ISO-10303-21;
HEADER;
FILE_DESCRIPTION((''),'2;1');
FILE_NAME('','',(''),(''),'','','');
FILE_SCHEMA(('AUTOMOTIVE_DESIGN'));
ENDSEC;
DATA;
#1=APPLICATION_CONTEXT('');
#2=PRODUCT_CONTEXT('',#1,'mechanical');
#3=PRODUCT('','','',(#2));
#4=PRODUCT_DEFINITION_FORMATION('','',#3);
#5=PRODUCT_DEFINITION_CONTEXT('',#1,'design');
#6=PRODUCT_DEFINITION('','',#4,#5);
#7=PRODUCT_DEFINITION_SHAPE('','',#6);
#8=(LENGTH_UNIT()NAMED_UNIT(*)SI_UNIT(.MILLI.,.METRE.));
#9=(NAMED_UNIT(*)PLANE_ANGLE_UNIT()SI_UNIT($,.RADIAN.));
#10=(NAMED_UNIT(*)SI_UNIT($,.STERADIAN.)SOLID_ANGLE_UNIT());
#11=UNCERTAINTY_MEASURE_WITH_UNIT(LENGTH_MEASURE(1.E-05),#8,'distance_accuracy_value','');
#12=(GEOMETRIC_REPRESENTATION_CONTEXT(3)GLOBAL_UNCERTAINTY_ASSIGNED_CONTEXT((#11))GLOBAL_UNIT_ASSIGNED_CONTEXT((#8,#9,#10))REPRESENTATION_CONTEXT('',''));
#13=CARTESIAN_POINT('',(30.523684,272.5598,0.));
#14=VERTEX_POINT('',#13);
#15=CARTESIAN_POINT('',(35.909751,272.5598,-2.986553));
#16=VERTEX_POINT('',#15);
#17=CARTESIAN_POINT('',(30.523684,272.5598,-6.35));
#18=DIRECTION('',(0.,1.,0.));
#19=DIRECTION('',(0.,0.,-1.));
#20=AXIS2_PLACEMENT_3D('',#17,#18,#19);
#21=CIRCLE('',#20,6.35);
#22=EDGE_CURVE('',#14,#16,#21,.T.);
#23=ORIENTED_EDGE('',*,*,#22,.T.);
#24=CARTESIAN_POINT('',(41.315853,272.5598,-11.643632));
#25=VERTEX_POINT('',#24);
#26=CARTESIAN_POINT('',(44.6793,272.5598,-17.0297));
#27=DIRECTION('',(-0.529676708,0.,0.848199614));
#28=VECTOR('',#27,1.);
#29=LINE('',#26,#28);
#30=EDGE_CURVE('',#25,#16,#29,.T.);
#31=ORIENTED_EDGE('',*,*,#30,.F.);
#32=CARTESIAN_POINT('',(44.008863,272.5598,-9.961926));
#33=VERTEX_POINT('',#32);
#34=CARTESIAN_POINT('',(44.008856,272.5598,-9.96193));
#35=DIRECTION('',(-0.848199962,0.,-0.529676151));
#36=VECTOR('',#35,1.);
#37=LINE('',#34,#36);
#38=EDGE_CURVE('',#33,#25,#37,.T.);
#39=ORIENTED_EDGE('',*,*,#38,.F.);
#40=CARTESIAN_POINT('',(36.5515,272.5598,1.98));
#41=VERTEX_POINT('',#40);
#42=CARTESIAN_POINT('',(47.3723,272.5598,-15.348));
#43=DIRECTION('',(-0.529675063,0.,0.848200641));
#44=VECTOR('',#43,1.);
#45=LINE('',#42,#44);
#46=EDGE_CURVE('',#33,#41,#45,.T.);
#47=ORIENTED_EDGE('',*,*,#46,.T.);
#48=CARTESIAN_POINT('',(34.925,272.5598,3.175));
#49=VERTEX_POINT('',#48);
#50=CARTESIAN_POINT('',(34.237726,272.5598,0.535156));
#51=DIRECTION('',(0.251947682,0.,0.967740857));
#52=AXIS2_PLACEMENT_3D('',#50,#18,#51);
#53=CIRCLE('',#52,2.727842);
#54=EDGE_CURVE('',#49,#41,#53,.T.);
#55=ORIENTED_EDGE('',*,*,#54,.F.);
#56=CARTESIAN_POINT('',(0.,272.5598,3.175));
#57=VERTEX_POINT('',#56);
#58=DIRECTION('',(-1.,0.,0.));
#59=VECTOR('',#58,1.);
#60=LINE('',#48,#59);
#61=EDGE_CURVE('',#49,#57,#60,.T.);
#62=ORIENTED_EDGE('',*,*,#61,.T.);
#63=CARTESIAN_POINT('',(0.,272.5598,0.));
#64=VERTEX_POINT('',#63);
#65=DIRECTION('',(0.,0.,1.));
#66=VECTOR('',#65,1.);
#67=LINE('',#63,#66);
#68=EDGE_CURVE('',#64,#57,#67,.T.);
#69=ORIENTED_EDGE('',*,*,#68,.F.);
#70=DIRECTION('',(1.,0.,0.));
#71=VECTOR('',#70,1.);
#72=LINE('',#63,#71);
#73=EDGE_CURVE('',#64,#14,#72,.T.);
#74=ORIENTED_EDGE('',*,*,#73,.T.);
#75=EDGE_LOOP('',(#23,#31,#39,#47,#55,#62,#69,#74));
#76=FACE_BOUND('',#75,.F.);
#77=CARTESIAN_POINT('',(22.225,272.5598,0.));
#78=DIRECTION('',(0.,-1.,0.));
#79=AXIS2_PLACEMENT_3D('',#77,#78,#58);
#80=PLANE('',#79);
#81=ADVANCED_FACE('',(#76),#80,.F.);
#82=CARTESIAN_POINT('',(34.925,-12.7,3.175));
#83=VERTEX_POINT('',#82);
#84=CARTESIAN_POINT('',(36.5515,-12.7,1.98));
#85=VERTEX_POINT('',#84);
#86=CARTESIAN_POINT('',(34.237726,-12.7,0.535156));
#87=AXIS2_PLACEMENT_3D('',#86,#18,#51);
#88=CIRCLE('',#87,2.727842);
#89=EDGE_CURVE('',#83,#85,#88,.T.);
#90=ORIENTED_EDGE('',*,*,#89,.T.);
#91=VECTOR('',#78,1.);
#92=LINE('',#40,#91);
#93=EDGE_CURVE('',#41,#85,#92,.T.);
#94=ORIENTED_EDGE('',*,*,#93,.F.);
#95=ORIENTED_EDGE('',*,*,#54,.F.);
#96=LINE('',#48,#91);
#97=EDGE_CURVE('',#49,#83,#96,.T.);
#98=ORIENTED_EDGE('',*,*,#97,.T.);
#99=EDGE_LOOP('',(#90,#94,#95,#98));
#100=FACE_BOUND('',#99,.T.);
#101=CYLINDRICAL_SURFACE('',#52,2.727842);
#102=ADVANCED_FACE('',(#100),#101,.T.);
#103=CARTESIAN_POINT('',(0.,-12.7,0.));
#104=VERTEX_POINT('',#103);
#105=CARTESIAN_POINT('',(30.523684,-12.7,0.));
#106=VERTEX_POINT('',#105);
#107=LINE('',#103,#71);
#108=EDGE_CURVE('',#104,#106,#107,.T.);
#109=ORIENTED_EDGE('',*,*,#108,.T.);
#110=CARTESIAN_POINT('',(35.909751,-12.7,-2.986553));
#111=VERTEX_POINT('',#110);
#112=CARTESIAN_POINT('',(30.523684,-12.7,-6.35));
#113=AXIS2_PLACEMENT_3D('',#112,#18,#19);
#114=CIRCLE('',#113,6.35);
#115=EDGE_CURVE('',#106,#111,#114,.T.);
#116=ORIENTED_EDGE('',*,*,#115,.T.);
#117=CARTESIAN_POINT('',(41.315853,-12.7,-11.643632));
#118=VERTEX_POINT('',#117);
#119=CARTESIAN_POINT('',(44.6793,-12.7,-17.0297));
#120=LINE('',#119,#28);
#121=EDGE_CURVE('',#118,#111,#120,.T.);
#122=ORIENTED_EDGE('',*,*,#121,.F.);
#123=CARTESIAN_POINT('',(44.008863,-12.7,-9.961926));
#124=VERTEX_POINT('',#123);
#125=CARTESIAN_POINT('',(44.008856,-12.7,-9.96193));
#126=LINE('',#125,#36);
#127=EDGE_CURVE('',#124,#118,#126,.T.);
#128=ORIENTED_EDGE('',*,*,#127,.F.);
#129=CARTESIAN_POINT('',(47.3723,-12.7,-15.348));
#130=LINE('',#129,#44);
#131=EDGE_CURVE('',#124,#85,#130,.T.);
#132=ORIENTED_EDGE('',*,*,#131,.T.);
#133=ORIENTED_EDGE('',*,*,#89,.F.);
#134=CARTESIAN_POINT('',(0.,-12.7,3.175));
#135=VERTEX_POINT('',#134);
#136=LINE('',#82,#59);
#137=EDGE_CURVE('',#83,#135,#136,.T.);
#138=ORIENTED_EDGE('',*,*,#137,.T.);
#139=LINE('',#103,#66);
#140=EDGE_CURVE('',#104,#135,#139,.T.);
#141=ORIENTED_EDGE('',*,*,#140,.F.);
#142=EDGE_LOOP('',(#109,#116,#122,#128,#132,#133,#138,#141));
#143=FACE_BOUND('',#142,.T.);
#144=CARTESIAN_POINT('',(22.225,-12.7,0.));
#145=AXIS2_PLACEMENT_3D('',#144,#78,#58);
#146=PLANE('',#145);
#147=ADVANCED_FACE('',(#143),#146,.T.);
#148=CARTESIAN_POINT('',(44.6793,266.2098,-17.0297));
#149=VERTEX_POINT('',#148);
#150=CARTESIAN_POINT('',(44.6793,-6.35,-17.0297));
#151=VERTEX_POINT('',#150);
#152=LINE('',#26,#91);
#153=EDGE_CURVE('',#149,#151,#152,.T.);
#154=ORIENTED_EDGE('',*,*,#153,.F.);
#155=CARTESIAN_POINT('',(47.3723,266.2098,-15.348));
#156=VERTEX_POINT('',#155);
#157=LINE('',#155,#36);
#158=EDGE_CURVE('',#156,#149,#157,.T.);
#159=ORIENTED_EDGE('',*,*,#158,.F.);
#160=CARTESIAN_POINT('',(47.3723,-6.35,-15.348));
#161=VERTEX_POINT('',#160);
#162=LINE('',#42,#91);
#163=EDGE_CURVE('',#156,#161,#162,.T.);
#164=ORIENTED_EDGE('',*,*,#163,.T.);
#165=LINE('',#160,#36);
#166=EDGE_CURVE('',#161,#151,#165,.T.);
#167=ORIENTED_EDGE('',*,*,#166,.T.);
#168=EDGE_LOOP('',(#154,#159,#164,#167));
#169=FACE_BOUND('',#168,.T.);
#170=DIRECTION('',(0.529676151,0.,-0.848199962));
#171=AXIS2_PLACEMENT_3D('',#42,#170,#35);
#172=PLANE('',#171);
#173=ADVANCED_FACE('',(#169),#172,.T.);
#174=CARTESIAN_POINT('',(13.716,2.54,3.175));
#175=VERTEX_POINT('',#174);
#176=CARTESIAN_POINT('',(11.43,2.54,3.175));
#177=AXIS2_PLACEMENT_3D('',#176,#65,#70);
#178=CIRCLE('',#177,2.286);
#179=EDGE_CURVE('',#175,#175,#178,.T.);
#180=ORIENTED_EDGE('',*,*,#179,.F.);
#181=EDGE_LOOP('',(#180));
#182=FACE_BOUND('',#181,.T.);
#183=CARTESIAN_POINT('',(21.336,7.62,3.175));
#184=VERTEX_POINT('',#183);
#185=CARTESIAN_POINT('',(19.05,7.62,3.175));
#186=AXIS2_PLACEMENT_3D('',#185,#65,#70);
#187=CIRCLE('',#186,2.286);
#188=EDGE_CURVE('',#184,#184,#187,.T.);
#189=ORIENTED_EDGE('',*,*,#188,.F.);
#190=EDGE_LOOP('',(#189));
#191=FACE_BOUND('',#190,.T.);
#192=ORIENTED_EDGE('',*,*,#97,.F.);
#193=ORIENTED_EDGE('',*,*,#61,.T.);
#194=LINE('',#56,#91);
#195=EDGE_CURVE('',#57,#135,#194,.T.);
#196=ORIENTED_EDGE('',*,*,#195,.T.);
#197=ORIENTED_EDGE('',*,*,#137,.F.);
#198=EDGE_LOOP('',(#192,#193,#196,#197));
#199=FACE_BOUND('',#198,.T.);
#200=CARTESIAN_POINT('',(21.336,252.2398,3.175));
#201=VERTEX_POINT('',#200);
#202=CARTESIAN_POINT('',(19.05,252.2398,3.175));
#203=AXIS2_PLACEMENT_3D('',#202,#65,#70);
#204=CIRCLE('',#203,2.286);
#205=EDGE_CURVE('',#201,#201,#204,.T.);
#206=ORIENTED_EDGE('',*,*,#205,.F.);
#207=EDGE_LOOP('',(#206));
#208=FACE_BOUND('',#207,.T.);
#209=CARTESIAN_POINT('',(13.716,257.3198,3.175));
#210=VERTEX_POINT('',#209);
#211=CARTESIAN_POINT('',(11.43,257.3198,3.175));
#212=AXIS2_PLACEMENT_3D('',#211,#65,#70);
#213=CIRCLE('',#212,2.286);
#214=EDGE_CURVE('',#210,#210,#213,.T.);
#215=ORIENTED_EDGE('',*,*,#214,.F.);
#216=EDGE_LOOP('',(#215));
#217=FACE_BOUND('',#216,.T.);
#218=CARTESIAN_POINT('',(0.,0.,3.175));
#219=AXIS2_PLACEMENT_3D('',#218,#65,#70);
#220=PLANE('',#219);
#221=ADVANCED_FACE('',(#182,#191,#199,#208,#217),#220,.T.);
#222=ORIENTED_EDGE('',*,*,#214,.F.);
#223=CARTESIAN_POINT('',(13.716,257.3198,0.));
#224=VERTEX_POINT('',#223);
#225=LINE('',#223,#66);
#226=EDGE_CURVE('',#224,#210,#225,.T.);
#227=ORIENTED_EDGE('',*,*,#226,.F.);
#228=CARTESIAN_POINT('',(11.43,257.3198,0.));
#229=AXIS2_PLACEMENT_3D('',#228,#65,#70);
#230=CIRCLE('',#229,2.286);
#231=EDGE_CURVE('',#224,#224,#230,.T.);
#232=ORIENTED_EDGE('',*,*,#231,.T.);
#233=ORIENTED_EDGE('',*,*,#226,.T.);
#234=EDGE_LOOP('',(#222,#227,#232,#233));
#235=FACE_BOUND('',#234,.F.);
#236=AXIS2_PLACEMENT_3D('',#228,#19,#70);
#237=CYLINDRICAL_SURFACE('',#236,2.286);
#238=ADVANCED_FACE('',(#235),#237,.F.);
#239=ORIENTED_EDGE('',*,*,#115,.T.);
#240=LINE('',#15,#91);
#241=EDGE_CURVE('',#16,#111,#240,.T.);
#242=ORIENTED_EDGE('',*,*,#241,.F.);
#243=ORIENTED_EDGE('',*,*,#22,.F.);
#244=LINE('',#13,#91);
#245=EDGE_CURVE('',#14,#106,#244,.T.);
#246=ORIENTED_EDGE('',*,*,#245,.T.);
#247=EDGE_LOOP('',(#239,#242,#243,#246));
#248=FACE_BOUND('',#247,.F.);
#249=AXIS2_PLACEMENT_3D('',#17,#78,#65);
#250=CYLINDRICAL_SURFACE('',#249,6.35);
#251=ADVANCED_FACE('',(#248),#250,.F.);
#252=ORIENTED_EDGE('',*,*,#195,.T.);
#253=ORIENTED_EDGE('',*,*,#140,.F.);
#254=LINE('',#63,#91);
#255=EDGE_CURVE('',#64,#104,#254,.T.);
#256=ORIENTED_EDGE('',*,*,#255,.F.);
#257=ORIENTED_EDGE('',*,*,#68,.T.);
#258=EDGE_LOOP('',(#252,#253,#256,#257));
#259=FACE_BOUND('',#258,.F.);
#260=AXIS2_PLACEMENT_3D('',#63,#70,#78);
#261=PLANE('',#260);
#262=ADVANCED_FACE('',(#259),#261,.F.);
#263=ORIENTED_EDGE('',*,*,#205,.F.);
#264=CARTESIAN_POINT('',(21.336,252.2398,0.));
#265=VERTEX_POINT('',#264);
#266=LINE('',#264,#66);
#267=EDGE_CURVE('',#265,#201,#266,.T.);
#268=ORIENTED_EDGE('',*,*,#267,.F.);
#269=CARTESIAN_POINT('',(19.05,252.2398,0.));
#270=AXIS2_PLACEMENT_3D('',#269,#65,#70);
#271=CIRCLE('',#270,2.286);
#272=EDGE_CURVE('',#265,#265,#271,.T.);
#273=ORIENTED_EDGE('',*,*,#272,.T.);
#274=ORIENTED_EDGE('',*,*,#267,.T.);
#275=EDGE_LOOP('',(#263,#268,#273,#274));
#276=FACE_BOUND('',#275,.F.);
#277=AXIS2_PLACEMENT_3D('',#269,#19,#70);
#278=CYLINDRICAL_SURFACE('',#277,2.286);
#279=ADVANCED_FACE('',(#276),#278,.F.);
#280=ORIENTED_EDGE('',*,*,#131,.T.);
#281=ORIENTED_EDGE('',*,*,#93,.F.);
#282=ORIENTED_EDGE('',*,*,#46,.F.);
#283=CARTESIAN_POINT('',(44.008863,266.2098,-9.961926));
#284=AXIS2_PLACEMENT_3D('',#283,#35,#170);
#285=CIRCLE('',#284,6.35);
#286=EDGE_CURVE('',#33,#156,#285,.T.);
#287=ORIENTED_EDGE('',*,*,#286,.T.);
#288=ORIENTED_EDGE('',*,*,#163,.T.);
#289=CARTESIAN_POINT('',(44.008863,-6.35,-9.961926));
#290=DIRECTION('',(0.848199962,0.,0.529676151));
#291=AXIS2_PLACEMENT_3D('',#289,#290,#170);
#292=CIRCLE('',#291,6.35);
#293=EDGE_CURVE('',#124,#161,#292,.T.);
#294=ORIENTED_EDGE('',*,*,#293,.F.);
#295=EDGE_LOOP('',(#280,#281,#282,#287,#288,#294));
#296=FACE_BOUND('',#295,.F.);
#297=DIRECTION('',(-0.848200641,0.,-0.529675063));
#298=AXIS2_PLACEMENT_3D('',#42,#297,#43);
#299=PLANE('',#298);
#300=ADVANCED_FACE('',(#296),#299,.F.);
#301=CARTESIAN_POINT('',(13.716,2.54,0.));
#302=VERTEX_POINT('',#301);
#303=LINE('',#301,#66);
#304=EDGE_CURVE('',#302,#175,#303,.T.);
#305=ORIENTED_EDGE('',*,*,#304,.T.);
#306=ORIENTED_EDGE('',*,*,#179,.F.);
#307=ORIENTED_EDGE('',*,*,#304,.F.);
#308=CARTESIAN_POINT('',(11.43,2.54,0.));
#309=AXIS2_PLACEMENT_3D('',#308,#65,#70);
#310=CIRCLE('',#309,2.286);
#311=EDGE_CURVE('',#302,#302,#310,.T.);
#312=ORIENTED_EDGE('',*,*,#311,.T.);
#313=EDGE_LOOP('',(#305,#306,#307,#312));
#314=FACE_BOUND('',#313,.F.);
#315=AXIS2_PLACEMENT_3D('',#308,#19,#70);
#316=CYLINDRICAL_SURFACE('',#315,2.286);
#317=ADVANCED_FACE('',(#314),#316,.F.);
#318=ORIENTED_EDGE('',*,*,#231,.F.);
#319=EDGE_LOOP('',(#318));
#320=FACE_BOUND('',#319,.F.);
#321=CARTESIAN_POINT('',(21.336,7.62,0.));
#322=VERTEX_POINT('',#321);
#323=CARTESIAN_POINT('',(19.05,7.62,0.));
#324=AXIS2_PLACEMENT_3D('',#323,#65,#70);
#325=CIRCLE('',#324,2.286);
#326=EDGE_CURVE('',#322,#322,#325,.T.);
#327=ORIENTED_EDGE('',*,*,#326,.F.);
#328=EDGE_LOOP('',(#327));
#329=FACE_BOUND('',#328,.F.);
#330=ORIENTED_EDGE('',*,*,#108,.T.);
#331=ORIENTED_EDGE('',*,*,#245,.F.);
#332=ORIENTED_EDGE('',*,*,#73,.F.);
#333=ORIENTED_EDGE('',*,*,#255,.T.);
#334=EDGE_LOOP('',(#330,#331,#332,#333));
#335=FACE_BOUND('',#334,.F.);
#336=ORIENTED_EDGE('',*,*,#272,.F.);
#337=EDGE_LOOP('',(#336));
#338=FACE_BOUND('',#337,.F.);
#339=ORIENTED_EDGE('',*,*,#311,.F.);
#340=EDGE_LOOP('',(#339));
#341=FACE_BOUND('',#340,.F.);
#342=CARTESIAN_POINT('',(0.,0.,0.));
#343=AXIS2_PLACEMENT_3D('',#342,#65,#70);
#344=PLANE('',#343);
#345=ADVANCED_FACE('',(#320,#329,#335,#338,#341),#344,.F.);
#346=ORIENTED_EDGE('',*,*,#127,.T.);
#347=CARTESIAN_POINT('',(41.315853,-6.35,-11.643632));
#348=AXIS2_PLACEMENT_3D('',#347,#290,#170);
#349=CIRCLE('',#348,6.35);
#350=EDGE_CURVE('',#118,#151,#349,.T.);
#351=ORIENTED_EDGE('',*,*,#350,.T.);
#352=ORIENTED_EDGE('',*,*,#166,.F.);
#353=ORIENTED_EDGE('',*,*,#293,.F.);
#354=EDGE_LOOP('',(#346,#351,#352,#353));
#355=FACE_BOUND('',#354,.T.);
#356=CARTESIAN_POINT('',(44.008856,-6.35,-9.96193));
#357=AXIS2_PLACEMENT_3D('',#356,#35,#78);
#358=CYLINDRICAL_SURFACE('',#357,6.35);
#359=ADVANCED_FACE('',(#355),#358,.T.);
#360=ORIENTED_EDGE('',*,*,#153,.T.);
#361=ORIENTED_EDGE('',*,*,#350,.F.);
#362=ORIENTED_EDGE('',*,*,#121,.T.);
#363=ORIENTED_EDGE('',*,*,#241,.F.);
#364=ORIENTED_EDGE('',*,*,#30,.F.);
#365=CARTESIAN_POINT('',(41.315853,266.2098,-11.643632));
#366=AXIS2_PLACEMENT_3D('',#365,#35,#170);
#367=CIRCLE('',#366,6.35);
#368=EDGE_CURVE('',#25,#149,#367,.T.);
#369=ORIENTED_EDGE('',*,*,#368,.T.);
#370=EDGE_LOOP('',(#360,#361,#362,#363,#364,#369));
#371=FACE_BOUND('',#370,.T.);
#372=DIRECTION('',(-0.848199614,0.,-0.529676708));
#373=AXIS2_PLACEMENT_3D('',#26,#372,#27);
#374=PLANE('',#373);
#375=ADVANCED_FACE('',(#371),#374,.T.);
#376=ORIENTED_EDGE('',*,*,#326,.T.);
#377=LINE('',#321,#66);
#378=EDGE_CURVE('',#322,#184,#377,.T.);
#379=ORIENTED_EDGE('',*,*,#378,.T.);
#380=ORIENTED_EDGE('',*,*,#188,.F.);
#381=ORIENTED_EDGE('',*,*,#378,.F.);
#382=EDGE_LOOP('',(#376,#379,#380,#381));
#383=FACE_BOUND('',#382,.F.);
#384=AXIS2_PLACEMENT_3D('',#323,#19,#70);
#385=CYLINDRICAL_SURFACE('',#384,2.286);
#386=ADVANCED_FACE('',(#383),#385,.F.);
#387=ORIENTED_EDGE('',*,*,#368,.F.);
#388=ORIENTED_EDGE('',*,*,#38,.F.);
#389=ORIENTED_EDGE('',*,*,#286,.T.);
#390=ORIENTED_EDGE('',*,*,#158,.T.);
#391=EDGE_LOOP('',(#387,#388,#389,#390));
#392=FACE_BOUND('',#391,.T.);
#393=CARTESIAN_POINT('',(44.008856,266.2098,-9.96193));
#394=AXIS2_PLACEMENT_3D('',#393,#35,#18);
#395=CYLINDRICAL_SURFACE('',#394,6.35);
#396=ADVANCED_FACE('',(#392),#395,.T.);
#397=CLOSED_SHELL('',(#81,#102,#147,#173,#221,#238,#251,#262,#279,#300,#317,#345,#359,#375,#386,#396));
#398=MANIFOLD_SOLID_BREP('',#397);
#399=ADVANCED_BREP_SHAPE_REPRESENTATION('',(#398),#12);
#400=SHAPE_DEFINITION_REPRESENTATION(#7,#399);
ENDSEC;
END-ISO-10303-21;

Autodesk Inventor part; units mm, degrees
ref_plane "YZ Plane" through (0, 0, 0) normal (1, 0, 0) x (0, 1, 0)
ref_plane "XZ Plane" through (0, 0, 0) normal (0, 1, 0) x (-1, 0, 0)
ref_plane "Work Plane1" through (0, 0, 0) normal (0, 0, 1) x (1, 0, 0)
sketch "Sketch1" plane through (0, 0, 0) normal (0, 0, 1) x (1, 0, 0)
  circle A0 centre (11.43, 2.54) radius 2.286 projected
  circle A1 centre (19.05, 7.62) radius 2.286 projected
  circle A2 centre (19.05, 252.2398) radius 2.286 projected
  circle A3 centre (11.43, 257.3198) radius 2.286 projected
  line L0 (22.225, -12.7) -> (-22.225, -12.7) projected
  line L1 (22.225, 272.5598) -> (-22.225, 272.5598) projected
  line L2 (34.925, -12.7) -> (-22.225, -12.7)
  line L3 (-22.225, -12.7) -> (-22.225, 272.5598) construction
  line L4 (-22.225, 272.5598) -> (34.925, 272.5598)
  line L5 (34.925, 272.5598) -> (34.925, -12.7)
  line L6 (0, 272.5598) -> (0, -12.7)
  point P0 (0, 0)
  point P1 (-22.225, -12.7)
  point P2 (0, -12.7)
  point P3 (0, -12.7)
  dimension "d0" = 57.15
  dimension "d9" = 34.925
extrude "Extrusion1" add sketch "Sketch1" along normal blind 3.175
sketch "Sketch2" plane through (-22.225, 272.5598, 0) normal (0, 1, 0) x (1, 0, 0)
  line L0 (69.8754, 18.7905) -> (57.15, -1.5875) construction
  line L1 (57.15, 0) -> (57.15, -3.175) projected
  line L2 (66.9043, 17.0297) -> (55.5406, -1.1676)
  line L3 (69.5973, 15.348) -> (58.7765, -1.98)
  arc A0 (57.15, -3.175) -> (58.7765, -1.98) centre (56.4627, -0.5351) ccw
  line L4 (57.15, -3.175) -> (55.5406, -1.1676)
  line L5 (69.5973, 15.348) -> (66.9043, 17.0297)
  point P0 (22.225, 0)
  dimension "d4" = 1.5875
  dimension "d5" = 1.5875
extrude "Extrusion2" add sketch "Sketch2" against normal up to surface (285.2598 mm away)
fillet "Fillet1" radius 6.35 3 edges at (46.0258, 272.5598, -16.1889) (34.0447, 129.9299, 0) (46.0258, -12.7, -16.1889)
properties part number "PolyIntakeTop" material "Polycarbonate, Smoke"
